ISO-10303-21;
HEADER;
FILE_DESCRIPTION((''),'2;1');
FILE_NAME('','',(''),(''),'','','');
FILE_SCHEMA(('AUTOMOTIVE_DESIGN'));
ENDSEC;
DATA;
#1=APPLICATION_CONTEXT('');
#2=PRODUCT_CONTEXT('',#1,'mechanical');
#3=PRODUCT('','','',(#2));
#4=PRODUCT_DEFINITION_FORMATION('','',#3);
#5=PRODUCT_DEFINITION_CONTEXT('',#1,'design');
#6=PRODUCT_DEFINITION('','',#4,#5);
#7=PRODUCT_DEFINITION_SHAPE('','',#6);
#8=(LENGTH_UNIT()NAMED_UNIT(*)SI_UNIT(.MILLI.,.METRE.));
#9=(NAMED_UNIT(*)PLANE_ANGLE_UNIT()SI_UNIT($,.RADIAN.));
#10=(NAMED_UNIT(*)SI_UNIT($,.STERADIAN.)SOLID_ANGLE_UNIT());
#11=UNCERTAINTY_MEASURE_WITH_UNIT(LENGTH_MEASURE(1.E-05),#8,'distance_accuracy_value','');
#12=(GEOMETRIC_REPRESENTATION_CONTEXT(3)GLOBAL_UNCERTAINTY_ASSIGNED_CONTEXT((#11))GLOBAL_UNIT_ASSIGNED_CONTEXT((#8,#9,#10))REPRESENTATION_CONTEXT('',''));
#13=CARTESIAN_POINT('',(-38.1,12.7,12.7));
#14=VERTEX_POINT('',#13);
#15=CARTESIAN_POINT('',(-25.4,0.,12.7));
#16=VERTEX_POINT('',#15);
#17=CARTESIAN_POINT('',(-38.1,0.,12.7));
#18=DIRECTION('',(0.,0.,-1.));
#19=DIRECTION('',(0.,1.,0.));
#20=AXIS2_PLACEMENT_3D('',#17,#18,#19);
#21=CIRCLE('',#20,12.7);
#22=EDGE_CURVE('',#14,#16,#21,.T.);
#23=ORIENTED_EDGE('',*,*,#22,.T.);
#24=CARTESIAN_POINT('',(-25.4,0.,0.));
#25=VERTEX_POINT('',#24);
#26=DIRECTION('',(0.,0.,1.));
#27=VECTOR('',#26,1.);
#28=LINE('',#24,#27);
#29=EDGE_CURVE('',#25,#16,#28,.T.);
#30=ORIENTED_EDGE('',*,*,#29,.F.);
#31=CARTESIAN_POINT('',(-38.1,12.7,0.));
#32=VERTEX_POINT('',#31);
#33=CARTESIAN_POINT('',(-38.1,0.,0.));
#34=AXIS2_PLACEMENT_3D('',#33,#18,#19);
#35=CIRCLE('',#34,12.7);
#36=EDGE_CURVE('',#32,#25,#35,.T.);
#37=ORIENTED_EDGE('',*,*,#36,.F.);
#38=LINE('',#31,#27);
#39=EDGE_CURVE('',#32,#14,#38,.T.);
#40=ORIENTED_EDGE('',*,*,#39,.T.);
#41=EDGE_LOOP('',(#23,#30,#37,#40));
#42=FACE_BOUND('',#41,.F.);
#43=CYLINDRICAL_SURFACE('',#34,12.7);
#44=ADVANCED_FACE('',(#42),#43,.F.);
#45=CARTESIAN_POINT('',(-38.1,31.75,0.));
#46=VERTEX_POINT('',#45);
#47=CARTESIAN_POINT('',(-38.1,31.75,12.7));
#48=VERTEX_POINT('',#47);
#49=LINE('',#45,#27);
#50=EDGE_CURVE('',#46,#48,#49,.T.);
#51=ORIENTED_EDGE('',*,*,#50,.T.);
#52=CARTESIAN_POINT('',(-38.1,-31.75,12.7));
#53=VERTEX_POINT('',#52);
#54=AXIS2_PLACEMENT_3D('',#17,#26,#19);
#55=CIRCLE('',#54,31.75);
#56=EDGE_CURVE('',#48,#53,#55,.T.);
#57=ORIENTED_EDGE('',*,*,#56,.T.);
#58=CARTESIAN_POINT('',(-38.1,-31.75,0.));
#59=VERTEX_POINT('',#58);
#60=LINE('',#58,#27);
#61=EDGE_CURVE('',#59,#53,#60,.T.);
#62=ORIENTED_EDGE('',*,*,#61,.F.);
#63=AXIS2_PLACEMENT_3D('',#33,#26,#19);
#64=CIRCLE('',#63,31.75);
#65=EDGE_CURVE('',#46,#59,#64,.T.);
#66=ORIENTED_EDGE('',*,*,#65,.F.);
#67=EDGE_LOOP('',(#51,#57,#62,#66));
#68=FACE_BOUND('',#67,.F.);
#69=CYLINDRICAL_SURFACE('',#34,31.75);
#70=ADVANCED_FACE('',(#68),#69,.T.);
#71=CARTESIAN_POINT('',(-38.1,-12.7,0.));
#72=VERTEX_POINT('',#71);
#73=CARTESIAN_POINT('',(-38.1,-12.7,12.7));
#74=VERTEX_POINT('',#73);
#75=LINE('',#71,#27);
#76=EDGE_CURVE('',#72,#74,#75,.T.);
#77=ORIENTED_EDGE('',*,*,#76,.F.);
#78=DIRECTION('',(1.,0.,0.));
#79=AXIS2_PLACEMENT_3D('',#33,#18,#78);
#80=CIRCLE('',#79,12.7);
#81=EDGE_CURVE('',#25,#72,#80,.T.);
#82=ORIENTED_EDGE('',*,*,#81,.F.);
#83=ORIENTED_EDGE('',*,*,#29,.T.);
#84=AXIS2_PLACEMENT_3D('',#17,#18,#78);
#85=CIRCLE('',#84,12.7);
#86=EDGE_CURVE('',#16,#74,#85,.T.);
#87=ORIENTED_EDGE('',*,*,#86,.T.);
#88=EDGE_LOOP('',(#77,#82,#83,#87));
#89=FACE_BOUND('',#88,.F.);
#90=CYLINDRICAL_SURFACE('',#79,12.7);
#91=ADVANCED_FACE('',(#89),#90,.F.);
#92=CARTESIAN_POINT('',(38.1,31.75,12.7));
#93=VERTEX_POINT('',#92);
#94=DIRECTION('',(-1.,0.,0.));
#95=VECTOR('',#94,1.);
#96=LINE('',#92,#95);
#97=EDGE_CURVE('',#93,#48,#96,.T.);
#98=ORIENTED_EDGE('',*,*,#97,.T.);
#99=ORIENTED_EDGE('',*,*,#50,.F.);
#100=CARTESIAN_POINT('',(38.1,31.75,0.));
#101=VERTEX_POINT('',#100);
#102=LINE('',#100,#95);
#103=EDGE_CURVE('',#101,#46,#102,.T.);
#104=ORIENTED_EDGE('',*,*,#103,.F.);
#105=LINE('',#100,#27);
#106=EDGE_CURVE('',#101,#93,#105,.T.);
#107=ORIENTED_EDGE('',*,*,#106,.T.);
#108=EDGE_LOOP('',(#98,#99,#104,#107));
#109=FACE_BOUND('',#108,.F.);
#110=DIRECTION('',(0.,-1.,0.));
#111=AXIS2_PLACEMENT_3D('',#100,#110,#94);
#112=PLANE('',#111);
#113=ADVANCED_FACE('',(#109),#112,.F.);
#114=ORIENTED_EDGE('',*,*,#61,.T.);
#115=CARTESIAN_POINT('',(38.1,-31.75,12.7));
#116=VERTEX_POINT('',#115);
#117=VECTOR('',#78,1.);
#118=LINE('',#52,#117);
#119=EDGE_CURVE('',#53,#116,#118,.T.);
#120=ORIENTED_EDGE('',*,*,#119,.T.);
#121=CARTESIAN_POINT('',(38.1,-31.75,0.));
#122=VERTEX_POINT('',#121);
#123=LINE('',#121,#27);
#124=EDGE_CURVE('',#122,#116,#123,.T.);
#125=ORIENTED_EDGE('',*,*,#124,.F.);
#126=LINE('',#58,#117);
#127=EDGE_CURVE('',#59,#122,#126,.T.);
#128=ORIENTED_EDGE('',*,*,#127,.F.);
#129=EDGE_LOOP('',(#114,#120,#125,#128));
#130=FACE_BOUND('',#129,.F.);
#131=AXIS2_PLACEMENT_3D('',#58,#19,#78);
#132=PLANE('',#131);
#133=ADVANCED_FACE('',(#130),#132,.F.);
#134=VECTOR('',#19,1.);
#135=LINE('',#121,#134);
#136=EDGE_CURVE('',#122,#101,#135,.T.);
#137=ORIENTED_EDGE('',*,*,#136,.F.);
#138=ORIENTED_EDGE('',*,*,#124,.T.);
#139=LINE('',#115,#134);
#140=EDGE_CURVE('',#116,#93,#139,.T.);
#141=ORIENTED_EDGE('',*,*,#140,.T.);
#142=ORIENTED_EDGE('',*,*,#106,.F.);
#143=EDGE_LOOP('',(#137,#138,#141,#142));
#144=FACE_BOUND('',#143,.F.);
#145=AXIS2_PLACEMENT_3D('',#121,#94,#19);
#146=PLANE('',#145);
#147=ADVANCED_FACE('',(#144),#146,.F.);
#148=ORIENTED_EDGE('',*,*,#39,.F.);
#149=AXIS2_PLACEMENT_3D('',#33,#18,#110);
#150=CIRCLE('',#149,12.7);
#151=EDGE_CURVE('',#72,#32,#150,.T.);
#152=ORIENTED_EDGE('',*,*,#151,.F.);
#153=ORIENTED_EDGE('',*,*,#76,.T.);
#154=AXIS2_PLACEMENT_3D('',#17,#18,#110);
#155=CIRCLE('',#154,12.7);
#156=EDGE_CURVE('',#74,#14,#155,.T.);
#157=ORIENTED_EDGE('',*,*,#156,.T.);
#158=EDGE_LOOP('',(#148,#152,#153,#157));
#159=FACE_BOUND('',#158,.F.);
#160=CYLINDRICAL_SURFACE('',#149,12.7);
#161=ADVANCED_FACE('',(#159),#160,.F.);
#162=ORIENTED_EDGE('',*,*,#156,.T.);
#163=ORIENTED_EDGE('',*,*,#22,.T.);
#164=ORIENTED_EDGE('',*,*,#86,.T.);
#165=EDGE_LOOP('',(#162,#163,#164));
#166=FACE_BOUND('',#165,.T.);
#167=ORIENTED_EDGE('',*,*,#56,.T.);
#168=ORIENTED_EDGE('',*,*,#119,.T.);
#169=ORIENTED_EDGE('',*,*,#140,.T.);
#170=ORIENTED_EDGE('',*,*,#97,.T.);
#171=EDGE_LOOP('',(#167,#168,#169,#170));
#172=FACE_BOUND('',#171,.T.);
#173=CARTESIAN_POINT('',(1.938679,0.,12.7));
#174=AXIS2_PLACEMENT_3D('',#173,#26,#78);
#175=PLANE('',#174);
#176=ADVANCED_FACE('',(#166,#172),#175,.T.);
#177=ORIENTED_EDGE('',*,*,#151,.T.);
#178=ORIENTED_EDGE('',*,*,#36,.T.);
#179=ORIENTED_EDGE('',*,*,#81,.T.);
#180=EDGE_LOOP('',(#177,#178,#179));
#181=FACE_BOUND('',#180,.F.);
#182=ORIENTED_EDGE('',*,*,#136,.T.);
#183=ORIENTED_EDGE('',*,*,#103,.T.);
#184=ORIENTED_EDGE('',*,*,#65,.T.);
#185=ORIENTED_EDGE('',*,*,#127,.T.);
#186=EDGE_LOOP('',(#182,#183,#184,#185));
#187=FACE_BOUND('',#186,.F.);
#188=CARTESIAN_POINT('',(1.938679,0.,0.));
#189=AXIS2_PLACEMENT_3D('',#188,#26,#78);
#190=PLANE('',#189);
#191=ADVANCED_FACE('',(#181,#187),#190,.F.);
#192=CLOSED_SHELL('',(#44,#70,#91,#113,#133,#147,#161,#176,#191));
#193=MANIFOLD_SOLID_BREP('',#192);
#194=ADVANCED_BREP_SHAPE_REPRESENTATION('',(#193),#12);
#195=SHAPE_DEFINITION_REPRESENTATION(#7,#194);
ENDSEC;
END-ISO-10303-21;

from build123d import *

# Parameters (mm, degrees)
F1_DEPTH = 12.7


# Not quite as in the source:
# - a feature of the source that left no trace in its solid (it failed there, or was rolled back) is left out


with BuildPart() as f1:
    # F0 (on Top) → F1 (new body)
    with BuildSketch(Plane.XY):
        with BuildLine():
            Line((-38.1, -31.75), (38.1, -31.75))
            Line((38.1, -31.75), (38.1, 31.75))
            Line((38.1, 31.75), (-38.1, 31.75))
            ThreePointArc((-38.1, 31.75), (-15.6493596973, 22.4506403027), (-6.35, 0))
            ThreePointArc((-6.35, 0), (-15.6493596973, -22.4506403027), (-38.1, -31.75))
        make_face()
        with BuildLine():
            ThreePointArc((-38.1, 31.75), (-69.85, 0), (-38.1, -31.75))
            Line((-38.1, -31.75), (-38.1, -12.7))
            ThreePointArc((-38.1, -12.7), (-50.8, 0), (-38.1, 12.7))
            Line((-38.1, 12.7), (-38.1, 31.75))
        make_face()
        with BuildLine():
            Line((-38.1, -12.7), (-38.1, -31.75))
            ThreePointArc((-38.1, -31.75), (-15.6493596973, -22.4506403027), (-6.35, 0))
            ThreePointArc((-6.35, 0), (-15.6493596973, 22.4506403027), (-38.1, 31.75))
            Line((-38.1, 31.75), (-38.1, 12.7))
            ThreePointArc((-38.1, 12.7), (-29.1197438789, 8.9802561211), (-25.4, 0))
            ThreePointArc((-25.4, 0), (-29.1197438789, -8.9802561211), (-38.1, -12.7))
        make_face()
    extrude(amount=F1_DEPTH)


solid = f1.part
